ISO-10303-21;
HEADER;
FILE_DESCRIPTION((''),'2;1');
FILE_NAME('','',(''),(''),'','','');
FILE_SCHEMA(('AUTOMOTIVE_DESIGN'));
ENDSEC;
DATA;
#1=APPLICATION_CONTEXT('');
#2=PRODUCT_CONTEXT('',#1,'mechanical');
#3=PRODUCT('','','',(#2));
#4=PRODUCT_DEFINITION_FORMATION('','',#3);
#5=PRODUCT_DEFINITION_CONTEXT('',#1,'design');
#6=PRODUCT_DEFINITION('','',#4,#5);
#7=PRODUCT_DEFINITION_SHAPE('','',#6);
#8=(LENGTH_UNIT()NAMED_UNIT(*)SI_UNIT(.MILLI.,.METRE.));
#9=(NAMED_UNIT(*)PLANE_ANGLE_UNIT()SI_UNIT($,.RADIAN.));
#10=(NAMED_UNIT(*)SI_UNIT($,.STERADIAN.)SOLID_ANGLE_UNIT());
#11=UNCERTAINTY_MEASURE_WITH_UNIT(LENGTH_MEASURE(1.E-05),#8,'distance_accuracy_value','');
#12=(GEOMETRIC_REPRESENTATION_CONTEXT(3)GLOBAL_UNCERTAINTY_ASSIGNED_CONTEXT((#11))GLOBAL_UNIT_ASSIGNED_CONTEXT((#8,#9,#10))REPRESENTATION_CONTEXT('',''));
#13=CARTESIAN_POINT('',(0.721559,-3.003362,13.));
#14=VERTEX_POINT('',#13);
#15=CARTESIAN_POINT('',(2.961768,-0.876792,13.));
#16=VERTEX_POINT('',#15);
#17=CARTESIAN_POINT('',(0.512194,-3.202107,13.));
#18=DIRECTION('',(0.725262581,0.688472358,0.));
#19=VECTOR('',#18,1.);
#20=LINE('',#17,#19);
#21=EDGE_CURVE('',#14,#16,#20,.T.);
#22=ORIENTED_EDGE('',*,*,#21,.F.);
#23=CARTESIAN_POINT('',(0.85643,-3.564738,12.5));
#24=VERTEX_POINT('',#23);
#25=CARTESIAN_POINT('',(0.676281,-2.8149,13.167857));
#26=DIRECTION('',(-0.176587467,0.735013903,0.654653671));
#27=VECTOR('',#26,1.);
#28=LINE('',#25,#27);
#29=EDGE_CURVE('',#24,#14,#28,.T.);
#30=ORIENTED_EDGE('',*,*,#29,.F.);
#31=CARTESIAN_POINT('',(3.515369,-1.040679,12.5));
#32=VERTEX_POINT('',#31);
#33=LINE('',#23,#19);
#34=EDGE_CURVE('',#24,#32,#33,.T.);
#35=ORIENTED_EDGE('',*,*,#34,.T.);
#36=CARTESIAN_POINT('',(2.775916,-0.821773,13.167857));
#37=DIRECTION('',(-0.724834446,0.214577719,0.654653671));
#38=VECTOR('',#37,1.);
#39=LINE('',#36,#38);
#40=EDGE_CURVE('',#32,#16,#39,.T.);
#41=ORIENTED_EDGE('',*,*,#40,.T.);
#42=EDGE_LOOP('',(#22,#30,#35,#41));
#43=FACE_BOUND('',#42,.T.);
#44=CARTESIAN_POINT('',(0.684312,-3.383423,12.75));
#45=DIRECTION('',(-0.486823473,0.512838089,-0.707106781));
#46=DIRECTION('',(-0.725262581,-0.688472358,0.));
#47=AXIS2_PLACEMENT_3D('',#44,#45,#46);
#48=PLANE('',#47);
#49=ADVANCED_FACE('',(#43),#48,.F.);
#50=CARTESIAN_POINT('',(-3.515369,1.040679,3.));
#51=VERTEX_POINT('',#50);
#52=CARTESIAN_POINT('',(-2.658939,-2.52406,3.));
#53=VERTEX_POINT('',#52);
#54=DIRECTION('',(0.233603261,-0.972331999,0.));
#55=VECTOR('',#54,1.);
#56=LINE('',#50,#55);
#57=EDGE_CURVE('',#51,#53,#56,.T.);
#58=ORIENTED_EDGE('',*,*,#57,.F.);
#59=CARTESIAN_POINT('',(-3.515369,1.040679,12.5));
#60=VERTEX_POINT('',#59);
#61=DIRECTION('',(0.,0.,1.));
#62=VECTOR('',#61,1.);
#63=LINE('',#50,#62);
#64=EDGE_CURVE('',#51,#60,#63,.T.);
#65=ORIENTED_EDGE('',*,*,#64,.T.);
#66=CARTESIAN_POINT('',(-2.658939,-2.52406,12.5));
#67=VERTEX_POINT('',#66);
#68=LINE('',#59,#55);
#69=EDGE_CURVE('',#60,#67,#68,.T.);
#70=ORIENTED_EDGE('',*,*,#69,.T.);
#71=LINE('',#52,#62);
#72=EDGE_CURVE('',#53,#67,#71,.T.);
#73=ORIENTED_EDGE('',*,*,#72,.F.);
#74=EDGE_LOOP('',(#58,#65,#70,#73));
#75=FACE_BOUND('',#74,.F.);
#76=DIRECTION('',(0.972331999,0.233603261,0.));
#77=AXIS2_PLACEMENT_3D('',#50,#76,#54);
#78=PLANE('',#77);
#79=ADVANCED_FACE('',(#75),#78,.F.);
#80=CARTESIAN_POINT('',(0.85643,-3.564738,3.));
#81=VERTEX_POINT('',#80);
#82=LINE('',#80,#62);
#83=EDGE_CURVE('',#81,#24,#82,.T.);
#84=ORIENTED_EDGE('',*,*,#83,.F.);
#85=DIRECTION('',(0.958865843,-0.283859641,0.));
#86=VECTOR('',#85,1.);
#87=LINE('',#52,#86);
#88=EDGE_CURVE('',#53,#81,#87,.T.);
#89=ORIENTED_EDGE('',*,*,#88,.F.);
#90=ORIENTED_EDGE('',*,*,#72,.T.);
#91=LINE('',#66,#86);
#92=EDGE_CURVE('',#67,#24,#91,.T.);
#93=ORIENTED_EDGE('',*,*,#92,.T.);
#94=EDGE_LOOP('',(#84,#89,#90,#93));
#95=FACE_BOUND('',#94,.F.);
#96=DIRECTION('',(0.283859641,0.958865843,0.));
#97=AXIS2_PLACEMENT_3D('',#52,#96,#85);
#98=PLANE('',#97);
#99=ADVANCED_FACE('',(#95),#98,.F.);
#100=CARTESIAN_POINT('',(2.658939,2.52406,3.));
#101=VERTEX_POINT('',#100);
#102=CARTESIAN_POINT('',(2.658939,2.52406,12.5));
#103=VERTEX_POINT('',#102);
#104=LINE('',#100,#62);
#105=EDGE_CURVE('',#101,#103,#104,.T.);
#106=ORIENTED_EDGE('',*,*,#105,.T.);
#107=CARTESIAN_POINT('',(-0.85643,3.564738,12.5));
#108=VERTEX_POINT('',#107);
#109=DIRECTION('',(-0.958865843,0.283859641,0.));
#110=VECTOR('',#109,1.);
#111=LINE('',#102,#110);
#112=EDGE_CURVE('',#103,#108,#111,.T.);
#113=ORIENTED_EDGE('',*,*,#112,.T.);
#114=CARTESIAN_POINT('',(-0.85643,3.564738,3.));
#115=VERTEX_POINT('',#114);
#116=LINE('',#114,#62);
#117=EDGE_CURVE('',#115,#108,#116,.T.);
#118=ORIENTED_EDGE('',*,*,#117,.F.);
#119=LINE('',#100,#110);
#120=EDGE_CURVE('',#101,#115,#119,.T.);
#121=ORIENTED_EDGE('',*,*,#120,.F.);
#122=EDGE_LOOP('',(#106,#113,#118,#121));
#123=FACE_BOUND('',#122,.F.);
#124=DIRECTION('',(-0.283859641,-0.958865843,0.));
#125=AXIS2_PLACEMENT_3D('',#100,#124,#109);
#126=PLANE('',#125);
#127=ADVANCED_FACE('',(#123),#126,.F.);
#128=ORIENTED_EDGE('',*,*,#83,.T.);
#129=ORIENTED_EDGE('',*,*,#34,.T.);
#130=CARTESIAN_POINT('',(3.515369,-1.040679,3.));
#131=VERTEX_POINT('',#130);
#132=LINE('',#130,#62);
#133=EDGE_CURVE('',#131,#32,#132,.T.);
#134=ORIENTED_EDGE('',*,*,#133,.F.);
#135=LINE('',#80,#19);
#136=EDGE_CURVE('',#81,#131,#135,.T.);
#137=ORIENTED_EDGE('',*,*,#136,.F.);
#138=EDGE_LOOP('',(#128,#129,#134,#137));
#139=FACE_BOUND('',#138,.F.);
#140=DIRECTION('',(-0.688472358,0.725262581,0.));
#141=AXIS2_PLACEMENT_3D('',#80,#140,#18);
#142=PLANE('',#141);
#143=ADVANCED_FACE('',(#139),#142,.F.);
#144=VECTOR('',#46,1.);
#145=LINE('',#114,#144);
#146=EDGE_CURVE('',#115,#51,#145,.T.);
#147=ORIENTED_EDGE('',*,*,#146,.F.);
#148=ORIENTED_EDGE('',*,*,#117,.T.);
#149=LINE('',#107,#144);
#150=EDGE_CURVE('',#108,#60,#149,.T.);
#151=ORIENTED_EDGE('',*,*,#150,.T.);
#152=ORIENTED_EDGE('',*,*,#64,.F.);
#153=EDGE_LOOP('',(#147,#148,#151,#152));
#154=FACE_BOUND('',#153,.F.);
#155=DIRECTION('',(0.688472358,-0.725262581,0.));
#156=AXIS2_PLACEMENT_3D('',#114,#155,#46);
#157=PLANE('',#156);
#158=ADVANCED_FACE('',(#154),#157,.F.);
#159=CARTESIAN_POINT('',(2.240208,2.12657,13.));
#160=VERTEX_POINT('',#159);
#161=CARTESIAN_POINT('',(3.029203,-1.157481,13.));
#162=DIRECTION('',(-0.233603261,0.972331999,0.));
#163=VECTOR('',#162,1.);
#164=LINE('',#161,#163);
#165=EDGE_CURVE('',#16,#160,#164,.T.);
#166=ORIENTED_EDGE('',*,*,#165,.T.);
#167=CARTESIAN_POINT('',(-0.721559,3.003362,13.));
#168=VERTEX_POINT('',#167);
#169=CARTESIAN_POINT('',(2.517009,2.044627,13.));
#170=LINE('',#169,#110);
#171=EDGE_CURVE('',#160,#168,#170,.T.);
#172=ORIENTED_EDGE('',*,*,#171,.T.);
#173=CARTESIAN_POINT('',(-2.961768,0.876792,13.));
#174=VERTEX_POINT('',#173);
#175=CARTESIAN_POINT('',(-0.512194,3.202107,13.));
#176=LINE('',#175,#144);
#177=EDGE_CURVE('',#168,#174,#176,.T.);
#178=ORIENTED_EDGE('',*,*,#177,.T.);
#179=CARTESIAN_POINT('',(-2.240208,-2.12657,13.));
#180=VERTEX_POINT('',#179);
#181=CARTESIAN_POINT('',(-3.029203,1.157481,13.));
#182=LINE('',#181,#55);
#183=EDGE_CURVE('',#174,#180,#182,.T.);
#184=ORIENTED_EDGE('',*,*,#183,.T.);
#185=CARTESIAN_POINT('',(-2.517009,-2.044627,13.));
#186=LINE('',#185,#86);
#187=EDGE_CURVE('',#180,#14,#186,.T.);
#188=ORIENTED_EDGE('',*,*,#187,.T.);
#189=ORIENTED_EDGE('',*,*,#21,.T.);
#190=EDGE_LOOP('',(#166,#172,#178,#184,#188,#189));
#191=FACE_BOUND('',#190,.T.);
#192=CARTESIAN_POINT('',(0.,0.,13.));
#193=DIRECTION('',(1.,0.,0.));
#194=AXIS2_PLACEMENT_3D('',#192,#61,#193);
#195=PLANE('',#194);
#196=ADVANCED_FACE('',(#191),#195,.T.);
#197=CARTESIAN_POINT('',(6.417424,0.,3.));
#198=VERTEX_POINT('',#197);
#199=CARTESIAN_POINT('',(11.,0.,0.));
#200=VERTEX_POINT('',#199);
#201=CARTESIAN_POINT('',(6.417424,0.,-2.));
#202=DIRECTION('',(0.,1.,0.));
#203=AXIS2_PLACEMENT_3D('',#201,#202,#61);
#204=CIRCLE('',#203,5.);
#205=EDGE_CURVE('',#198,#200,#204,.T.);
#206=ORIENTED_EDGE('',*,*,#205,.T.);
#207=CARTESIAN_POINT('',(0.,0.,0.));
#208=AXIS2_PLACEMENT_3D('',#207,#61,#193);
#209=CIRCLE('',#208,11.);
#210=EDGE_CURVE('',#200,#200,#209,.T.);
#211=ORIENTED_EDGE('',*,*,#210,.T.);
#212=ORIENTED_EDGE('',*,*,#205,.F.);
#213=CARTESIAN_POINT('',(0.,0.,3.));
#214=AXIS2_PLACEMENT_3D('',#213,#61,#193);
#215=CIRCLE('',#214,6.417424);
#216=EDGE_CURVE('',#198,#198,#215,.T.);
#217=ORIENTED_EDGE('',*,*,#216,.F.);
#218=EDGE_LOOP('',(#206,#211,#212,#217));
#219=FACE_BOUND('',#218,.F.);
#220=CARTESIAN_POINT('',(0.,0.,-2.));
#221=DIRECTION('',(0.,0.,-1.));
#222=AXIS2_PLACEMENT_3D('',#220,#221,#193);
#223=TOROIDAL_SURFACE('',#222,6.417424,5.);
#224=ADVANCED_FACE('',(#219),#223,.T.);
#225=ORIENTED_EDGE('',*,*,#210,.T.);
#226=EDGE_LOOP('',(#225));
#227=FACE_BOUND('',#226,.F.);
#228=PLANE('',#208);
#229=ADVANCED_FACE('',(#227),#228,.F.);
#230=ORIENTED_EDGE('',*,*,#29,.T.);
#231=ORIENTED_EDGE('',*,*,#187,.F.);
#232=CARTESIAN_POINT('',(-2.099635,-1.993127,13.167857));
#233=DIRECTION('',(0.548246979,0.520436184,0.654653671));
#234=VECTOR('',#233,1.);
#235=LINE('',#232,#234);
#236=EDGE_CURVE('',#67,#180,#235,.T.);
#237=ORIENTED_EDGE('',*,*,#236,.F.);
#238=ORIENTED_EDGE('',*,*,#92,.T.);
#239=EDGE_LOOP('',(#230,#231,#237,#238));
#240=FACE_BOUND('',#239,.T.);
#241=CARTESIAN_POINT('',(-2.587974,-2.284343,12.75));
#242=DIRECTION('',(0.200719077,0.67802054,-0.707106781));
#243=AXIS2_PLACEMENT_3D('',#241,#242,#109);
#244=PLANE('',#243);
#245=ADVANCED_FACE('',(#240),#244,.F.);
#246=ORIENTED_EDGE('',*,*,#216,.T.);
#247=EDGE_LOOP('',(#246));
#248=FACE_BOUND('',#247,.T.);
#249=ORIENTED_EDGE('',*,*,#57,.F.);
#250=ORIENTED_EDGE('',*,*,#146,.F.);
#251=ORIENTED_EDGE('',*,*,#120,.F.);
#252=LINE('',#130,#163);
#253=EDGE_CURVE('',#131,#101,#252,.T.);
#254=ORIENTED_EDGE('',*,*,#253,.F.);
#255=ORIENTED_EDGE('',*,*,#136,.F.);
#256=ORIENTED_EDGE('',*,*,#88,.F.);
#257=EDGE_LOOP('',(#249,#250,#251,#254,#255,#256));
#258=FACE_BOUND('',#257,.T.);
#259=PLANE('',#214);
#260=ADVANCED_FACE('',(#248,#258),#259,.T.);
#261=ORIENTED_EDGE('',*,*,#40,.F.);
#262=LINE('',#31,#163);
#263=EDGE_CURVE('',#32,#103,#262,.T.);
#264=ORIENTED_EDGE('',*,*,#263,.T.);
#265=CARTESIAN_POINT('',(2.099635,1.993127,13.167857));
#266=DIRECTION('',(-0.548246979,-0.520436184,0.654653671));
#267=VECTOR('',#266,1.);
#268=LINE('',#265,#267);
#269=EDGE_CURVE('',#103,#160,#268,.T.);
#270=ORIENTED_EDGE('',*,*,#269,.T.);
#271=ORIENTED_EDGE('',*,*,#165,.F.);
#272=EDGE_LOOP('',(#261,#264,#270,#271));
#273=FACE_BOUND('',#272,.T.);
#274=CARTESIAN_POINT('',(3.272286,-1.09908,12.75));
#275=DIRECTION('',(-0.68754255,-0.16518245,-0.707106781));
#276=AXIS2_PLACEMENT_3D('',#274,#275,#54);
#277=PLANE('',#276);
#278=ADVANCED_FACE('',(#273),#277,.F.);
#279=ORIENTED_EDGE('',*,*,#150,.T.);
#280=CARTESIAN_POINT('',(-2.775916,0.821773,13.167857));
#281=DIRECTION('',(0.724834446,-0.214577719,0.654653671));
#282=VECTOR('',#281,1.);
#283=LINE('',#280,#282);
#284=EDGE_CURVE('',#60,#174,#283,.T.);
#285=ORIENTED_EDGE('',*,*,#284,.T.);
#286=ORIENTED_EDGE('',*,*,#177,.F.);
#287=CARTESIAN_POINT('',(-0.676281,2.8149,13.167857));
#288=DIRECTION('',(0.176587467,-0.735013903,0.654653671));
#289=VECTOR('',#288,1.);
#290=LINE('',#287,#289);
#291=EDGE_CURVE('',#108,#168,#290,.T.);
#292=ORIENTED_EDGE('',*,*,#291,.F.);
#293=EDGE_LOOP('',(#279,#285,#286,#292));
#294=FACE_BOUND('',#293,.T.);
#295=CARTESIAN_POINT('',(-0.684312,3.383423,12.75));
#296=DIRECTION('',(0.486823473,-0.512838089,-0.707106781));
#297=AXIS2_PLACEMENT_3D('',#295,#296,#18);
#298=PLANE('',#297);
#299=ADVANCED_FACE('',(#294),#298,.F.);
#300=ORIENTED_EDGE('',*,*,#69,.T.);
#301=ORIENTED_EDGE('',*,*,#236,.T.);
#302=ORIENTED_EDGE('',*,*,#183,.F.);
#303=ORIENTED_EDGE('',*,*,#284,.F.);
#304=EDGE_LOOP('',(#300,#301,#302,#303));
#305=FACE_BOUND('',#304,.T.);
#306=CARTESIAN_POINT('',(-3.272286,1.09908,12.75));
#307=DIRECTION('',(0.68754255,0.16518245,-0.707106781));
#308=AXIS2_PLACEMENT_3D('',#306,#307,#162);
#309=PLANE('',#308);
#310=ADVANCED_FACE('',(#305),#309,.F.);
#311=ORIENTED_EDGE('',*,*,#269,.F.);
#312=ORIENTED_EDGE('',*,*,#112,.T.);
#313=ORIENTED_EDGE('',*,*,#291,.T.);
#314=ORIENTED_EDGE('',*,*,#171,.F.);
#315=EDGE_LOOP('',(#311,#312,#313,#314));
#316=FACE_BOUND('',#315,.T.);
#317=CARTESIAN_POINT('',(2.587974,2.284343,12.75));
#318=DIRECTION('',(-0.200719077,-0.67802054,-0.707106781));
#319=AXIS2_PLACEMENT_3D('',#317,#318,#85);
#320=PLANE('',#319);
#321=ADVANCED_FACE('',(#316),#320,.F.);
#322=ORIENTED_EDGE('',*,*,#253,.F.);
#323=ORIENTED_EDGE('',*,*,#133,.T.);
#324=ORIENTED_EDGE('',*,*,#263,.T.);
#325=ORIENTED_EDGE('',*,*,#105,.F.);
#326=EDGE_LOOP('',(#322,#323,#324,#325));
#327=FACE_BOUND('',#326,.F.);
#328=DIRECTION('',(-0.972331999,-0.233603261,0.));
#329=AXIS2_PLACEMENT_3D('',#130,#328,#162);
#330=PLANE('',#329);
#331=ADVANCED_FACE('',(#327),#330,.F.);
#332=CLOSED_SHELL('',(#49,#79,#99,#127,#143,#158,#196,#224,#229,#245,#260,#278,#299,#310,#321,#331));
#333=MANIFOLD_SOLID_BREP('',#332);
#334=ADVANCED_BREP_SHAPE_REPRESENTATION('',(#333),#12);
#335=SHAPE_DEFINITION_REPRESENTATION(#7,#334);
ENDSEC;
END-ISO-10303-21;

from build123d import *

# Parameters (mm, degrees)
F0_R     = 11
F1_DEPTH = 3
F3_DEPTH = 10
F4_SIZE  = 0.5


# Not quite as in the source:
# - a fillet or chamfer that OpenCascade refuses, or shapes differently, is made with other operations: its cross-section is extruded or revolved along the edge and cut away or added


with BuildPart() as f1:
    # F0 (on Top) → F1 (new body)
    with BuildSketch(Plane.XY):
        Circle(F0_R)
    extrude(amount=F1_DEPTH)

    # F2 (on face) → F3 (join)
    with BuildSketch(Plane.XY.offset(3)):
        Polygon((0.8564302523, -3.5647384976), (3.5153692229, -1.0406788937), (2.6589389706, 2.5240596039), (-0.8564302523, 3.5647384976), (-3.5153692229, 1.0406788937), (-2.6589389706, -2.5240596039), align=None)
    extrude(amount=F3_DEPTH)

    # F4
    f4_edges = [f1.edges().sort_by_distance(p)[0] for p in [
        (2.1859, -2.302709, 13),
        (3.087154, 0.74169, 13),
        (0.901254, 3.044399, 13),
        (-2.1859, 2.302709, 13),
        (-3.087154, -0.74169, 13),
        (-0.901254, -3.044399, 13),
    ]]
    chamfer(f4_edges, length=F4_SIZE)

    # F5: fillet of radius 5 on 1 edges, made by hand

    # F5_s1 → F5_t2 (revolve, cut)
    with BuildSketch(Plane.XZ):
        with BuildLine():
            ThreePointArc((6.417424305, 3), (9.1560370926, 2.1833001327), (11, 0))
            Line((11, 0), (11, 3))
            Line((11, 3), (6.417424305, 3))
        make_face()
    revolve(axis=Axis((0, 0, 3), (0, 0, 1)), mode=Mode.SUBTRACT)


solid = f1.part
